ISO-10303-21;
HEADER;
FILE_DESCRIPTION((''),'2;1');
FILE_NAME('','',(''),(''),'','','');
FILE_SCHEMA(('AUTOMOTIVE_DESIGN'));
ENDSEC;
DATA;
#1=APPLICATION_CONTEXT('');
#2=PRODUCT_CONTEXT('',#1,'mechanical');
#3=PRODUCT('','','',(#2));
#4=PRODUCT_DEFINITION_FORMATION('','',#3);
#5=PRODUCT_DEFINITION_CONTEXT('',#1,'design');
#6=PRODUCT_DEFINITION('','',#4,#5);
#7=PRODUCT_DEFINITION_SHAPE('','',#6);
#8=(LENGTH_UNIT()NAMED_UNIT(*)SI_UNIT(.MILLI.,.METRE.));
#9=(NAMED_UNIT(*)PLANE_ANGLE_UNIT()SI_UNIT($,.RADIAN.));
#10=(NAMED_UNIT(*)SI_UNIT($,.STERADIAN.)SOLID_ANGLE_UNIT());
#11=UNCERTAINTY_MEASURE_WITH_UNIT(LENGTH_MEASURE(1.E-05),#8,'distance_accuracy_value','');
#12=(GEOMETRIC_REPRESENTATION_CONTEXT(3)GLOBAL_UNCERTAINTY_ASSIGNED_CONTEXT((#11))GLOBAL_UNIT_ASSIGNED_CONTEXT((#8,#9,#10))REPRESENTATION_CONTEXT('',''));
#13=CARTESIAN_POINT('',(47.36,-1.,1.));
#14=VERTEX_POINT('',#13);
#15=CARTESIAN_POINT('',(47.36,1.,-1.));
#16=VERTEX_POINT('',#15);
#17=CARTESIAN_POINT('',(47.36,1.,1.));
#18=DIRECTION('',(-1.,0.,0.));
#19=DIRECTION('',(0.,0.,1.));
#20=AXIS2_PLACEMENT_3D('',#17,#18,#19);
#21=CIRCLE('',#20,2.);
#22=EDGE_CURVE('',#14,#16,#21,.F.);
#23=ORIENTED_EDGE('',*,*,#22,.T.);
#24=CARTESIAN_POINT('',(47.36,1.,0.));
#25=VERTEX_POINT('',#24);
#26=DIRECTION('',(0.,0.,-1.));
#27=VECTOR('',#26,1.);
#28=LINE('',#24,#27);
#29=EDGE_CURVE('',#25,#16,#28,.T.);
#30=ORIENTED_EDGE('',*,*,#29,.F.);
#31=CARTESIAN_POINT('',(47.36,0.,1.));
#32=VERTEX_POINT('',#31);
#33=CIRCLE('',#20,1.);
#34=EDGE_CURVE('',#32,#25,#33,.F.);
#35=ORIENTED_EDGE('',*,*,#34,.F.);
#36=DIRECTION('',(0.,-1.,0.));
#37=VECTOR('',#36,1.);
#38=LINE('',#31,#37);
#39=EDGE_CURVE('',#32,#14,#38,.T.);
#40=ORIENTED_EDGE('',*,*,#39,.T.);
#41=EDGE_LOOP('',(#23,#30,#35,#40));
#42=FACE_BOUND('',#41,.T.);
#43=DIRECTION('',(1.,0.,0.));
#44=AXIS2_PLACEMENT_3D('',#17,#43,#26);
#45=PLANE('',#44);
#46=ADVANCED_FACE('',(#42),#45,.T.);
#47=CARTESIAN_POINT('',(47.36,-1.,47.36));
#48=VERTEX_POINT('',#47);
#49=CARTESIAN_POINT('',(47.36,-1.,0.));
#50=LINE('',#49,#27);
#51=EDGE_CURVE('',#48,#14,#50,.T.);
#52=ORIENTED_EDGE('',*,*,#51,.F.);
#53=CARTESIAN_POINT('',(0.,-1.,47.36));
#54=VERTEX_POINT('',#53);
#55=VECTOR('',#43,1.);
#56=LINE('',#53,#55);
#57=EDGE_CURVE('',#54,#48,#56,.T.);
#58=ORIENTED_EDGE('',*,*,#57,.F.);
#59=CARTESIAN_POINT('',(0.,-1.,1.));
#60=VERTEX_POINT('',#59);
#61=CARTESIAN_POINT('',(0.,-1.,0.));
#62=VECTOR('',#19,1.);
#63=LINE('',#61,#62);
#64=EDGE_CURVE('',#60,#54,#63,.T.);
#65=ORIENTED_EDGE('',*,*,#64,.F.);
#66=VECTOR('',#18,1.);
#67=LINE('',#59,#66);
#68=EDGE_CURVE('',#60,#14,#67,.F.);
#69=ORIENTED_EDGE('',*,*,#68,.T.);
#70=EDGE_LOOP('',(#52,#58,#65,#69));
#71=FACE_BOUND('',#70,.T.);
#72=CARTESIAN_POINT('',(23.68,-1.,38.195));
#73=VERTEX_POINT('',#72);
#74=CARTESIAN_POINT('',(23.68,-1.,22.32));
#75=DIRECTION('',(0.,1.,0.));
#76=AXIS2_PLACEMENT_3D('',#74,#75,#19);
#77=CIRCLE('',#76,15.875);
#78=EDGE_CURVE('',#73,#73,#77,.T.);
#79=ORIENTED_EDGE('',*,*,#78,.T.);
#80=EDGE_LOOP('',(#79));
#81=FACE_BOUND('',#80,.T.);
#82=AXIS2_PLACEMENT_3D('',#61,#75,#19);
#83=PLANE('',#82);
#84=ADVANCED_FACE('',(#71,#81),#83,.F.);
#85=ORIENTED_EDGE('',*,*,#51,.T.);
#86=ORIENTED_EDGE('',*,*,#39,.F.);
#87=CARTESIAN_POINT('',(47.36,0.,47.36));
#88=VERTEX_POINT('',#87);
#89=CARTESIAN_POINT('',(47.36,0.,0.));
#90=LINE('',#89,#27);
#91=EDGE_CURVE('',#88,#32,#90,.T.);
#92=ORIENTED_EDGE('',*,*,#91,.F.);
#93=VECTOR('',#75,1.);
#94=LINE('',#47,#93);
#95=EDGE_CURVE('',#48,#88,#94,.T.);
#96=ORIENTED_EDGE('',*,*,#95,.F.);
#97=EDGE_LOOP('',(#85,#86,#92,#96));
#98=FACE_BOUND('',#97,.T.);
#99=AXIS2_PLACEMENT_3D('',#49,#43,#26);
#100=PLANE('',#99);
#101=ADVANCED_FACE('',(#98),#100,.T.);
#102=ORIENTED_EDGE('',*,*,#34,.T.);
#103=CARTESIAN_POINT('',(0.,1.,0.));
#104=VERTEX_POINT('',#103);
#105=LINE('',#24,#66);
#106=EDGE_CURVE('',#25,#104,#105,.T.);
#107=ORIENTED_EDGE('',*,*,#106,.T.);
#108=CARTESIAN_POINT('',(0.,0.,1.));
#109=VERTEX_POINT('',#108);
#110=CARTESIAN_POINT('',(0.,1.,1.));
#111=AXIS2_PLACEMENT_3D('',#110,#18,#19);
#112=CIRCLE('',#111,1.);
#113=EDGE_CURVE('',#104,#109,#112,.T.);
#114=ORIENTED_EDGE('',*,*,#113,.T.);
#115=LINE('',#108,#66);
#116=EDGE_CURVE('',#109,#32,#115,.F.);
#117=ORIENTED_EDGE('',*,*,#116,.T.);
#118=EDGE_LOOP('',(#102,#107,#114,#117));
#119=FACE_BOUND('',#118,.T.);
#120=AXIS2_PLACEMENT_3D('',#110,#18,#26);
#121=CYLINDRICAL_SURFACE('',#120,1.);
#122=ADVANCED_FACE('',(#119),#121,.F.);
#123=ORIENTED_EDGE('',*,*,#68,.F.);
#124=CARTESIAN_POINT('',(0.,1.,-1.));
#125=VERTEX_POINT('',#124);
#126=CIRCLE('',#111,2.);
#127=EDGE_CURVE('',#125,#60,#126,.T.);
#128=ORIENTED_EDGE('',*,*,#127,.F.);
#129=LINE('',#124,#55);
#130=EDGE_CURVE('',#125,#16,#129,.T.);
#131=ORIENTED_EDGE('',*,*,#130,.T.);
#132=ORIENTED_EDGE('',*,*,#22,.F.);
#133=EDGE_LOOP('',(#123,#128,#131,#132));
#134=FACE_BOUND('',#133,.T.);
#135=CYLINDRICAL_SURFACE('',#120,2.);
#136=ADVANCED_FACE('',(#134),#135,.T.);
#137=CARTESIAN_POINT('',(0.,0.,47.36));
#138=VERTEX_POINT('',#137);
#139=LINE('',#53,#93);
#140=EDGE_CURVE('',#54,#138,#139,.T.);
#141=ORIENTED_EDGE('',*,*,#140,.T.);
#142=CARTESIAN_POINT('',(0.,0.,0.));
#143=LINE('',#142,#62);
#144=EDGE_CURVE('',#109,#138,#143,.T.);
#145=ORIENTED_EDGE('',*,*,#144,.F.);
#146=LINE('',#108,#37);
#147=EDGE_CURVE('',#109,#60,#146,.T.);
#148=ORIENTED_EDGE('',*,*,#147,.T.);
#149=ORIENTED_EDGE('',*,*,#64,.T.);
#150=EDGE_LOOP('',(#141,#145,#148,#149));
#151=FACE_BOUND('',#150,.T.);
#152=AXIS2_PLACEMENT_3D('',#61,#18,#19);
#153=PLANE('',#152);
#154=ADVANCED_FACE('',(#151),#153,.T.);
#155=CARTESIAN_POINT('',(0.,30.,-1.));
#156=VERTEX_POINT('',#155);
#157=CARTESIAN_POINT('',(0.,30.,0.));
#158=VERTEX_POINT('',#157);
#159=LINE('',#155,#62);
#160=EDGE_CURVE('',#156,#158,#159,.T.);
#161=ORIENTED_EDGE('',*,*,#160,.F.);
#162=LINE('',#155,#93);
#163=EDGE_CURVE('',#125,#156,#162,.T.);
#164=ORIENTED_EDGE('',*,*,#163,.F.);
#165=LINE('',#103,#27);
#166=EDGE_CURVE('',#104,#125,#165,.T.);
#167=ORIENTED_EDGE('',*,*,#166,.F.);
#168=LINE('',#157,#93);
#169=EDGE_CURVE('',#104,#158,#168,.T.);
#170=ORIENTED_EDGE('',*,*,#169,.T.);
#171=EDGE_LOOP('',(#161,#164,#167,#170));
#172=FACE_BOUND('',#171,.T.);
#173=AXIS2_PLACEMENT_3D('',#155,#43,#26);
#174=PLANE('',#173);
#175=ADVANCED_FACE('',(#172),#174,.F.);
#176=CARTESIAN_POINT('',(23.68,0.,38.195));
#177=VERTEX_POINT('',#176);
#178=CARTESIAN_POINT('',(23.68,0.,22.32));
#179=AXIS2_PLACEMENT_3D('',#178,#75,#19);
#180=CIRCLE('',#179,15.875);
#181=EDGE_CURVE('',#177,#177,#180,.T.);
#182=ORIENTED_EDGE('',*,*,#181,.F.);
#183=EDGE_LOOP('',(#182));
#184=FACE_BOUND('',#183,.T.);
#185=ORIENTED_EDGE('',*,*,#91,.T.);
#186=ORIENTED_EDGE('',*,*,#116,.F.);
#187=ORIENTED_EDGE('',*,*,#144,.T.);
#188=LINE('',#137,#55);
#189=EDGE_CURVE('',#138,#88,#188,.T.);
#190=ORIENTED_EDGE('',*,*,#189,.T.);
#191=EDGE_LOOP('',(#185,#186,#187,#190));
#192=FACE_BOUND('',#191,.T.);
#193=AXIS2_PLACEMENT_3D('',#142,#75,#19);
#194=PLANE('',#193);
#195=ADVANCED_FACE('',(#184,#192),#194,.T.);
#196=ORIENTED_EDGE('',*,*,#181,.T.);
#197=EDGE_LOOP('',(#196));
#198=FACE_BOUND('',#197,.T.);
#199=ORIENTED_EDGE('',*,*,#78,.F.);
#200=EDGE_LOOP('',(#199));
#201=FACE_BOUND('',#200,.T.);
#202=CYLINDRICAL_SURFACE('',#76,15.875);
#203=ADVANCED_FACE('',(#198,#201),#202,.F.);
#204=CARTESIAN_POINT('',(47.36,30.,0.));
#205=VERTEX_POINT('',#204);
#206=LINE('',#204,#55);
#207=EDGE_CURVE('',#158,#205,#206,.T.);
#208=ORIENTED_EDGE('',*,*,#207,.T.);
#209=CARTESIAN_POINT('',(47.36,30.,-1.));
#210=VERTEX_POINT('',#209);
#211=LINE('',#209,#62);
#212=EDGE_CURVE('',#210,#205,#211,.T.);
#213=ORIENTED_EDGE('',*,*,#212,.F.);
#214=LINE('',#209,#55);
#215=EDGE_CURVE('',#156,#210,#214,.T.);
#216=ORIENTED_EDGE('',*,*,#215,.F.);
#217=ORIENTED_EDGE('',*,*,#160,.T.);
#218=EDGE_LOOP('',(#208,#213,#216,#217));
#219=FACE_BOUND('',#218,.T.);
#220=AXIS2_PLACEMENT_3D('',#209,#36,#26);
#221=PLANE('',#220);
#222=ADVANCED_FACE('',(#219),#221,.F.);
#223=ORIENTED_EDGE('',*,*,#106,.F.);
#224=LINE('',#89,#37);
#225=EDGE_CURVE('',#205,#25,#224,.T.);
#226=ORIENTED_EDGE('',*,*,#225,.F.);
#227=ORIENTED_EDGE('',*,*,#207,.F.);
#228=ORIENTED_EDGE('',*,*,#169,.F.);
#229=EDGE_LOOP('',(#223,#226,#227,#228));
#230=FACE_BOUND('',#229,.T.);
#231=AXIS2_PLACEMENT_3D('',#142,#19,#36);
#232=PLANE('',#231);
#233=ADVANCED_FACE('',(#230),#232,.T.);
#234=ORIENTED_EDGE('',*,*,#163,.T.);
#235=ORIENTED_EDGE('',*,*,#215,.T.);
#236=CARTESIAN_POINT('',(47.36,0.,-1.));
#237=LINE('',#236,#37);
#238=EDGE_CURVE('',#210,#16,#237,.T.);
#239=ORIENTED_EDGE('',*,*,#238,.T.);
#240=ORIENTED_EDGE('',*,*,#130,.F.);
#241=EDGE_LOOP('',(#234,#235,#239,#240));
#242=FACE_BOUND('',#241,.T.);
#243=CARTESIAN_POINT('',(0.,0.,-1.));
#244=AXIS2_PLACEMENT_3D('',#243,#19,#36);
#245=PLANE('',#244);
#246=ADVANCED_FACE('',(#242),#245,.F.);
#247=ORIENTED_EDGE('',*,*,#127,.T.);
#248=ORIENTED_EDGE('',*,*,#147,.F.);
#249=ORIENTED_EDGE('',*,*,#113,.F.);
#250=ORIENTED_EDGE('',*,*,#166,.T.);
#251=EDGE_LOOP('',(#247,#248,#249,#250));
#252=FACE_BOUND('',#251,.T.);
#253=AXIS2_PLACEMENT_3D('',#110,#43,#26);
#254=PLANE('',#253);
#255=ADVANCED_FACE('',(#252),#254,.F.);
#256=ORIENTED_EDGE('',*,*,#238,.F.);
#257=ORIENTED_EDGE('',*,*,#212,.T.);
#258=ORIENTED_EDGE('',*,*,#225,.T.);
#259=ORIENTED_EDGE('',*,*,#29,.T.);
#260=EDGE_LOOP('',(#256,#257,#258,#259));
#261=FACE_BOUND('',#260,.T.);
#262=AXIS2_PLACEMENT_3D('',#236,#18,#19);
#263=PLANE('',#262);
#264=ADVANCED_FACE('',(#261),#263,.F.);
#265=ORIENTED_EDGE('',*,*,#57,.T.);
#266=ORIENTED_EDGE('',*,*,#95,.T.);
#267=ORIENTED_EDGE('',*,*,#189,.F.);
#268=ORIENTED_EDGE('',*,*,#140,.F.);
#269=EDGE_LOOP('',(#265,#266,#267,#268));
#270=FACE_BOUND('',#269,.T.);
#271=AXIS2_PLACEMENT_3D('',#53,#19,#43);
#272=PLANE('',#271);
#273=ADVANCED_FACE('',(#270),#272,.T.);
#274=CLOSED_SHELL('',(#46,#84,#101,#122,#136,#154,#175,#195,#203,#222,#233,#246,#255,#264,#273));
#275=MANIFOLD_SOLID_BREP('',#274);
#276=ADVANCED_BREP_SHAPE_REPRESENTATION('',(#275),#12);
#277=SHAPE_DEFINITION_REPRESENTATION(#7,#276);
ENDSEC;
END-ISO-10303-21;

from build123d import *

# Parameters (mm, degrees)
SKETCH10_W                   = 47.36
SKETCH10_H                   = 47.36
BASE_FLANGE1_DEPTH           = 1
EDGE_FLANGE1_STRIP_W         = 6
EDGE_FLANGE1_STRIP_H         = 1
EDGE_FLANGE1_STRIP_CUT_DEPTH = 47.36
EDGE_FLANGE1_DEPTH           = 47.36
SKETCH20_R                   = 15.875
CUT_EXTRUDE1_DEPTH           = 74.388958298


# Sheet-metal steps are written as plain solids
with BuildPart() as part:
    # Sketch10 → Base-Flange1 (new body)
    with BuildSketch(Plane(origin=(0, 0, 0), x_dir=(1, 0, 0), z_dir=(0, 1, 0))):
        with Locations((23.68, -23.68)):
            Rectangle(SKETCH10_W, SKETCH10_H)
    extrude(amount=-BASE_FLANGE1_DEPTH)

    # Edge-Flange1 strip (across the edge) → Edge-Flange1 strip cut (cut)
    with BuildSketch(Plane.ZY.offset(-47.36)):
        with Locations((-2, -0.5)):
            Rectangle(EDGE_FLANGE1_STRIP_W, EDGE_FLANGE1_STRIP_H)
    extrude(amount=EDGE_FLANGE1_STRIP_CUT_DEPTH, mode=Mode.SUBTRACT)

    # Edge-Flange1 section (across the edge) → Edge-Flange1 (add)
    with BuildSketch(Plane.ZY.offset(-47.36)):
        with BuildLine():
            Line((-1, 1), (-1, 30))
            Line((-1, 30), (0, 30))
            Line((0, 30), (0, 1))
            ThreePointArc((0, 1), (0.292893219, 0.292893219), (1, 0))
            Line((1, 0), (1, -1))
            ThreePointArc((1, -1), (-0.414213562, -0.414213562), (-1, 1))
        make_face()
    extrude(amount=EDGE_FLANGE1_DEPTH)

    # Sketch20 → Cut-Extrude1 (cut, through all)
    with BuildSketch(Plane(origin=(0, 0, 0), x_dir=(1, 0, 0), z_dir=(0, 1, 0))):
        with Locations(Location((23.68, -22.32, 0), (0, 0, 270))):
            Circle(SKETCH20_R)
    extrude(amount=-CUT_EXTRUDE1_DEPTH, mode=Mode.SUBTRACT)


solid = part.part
